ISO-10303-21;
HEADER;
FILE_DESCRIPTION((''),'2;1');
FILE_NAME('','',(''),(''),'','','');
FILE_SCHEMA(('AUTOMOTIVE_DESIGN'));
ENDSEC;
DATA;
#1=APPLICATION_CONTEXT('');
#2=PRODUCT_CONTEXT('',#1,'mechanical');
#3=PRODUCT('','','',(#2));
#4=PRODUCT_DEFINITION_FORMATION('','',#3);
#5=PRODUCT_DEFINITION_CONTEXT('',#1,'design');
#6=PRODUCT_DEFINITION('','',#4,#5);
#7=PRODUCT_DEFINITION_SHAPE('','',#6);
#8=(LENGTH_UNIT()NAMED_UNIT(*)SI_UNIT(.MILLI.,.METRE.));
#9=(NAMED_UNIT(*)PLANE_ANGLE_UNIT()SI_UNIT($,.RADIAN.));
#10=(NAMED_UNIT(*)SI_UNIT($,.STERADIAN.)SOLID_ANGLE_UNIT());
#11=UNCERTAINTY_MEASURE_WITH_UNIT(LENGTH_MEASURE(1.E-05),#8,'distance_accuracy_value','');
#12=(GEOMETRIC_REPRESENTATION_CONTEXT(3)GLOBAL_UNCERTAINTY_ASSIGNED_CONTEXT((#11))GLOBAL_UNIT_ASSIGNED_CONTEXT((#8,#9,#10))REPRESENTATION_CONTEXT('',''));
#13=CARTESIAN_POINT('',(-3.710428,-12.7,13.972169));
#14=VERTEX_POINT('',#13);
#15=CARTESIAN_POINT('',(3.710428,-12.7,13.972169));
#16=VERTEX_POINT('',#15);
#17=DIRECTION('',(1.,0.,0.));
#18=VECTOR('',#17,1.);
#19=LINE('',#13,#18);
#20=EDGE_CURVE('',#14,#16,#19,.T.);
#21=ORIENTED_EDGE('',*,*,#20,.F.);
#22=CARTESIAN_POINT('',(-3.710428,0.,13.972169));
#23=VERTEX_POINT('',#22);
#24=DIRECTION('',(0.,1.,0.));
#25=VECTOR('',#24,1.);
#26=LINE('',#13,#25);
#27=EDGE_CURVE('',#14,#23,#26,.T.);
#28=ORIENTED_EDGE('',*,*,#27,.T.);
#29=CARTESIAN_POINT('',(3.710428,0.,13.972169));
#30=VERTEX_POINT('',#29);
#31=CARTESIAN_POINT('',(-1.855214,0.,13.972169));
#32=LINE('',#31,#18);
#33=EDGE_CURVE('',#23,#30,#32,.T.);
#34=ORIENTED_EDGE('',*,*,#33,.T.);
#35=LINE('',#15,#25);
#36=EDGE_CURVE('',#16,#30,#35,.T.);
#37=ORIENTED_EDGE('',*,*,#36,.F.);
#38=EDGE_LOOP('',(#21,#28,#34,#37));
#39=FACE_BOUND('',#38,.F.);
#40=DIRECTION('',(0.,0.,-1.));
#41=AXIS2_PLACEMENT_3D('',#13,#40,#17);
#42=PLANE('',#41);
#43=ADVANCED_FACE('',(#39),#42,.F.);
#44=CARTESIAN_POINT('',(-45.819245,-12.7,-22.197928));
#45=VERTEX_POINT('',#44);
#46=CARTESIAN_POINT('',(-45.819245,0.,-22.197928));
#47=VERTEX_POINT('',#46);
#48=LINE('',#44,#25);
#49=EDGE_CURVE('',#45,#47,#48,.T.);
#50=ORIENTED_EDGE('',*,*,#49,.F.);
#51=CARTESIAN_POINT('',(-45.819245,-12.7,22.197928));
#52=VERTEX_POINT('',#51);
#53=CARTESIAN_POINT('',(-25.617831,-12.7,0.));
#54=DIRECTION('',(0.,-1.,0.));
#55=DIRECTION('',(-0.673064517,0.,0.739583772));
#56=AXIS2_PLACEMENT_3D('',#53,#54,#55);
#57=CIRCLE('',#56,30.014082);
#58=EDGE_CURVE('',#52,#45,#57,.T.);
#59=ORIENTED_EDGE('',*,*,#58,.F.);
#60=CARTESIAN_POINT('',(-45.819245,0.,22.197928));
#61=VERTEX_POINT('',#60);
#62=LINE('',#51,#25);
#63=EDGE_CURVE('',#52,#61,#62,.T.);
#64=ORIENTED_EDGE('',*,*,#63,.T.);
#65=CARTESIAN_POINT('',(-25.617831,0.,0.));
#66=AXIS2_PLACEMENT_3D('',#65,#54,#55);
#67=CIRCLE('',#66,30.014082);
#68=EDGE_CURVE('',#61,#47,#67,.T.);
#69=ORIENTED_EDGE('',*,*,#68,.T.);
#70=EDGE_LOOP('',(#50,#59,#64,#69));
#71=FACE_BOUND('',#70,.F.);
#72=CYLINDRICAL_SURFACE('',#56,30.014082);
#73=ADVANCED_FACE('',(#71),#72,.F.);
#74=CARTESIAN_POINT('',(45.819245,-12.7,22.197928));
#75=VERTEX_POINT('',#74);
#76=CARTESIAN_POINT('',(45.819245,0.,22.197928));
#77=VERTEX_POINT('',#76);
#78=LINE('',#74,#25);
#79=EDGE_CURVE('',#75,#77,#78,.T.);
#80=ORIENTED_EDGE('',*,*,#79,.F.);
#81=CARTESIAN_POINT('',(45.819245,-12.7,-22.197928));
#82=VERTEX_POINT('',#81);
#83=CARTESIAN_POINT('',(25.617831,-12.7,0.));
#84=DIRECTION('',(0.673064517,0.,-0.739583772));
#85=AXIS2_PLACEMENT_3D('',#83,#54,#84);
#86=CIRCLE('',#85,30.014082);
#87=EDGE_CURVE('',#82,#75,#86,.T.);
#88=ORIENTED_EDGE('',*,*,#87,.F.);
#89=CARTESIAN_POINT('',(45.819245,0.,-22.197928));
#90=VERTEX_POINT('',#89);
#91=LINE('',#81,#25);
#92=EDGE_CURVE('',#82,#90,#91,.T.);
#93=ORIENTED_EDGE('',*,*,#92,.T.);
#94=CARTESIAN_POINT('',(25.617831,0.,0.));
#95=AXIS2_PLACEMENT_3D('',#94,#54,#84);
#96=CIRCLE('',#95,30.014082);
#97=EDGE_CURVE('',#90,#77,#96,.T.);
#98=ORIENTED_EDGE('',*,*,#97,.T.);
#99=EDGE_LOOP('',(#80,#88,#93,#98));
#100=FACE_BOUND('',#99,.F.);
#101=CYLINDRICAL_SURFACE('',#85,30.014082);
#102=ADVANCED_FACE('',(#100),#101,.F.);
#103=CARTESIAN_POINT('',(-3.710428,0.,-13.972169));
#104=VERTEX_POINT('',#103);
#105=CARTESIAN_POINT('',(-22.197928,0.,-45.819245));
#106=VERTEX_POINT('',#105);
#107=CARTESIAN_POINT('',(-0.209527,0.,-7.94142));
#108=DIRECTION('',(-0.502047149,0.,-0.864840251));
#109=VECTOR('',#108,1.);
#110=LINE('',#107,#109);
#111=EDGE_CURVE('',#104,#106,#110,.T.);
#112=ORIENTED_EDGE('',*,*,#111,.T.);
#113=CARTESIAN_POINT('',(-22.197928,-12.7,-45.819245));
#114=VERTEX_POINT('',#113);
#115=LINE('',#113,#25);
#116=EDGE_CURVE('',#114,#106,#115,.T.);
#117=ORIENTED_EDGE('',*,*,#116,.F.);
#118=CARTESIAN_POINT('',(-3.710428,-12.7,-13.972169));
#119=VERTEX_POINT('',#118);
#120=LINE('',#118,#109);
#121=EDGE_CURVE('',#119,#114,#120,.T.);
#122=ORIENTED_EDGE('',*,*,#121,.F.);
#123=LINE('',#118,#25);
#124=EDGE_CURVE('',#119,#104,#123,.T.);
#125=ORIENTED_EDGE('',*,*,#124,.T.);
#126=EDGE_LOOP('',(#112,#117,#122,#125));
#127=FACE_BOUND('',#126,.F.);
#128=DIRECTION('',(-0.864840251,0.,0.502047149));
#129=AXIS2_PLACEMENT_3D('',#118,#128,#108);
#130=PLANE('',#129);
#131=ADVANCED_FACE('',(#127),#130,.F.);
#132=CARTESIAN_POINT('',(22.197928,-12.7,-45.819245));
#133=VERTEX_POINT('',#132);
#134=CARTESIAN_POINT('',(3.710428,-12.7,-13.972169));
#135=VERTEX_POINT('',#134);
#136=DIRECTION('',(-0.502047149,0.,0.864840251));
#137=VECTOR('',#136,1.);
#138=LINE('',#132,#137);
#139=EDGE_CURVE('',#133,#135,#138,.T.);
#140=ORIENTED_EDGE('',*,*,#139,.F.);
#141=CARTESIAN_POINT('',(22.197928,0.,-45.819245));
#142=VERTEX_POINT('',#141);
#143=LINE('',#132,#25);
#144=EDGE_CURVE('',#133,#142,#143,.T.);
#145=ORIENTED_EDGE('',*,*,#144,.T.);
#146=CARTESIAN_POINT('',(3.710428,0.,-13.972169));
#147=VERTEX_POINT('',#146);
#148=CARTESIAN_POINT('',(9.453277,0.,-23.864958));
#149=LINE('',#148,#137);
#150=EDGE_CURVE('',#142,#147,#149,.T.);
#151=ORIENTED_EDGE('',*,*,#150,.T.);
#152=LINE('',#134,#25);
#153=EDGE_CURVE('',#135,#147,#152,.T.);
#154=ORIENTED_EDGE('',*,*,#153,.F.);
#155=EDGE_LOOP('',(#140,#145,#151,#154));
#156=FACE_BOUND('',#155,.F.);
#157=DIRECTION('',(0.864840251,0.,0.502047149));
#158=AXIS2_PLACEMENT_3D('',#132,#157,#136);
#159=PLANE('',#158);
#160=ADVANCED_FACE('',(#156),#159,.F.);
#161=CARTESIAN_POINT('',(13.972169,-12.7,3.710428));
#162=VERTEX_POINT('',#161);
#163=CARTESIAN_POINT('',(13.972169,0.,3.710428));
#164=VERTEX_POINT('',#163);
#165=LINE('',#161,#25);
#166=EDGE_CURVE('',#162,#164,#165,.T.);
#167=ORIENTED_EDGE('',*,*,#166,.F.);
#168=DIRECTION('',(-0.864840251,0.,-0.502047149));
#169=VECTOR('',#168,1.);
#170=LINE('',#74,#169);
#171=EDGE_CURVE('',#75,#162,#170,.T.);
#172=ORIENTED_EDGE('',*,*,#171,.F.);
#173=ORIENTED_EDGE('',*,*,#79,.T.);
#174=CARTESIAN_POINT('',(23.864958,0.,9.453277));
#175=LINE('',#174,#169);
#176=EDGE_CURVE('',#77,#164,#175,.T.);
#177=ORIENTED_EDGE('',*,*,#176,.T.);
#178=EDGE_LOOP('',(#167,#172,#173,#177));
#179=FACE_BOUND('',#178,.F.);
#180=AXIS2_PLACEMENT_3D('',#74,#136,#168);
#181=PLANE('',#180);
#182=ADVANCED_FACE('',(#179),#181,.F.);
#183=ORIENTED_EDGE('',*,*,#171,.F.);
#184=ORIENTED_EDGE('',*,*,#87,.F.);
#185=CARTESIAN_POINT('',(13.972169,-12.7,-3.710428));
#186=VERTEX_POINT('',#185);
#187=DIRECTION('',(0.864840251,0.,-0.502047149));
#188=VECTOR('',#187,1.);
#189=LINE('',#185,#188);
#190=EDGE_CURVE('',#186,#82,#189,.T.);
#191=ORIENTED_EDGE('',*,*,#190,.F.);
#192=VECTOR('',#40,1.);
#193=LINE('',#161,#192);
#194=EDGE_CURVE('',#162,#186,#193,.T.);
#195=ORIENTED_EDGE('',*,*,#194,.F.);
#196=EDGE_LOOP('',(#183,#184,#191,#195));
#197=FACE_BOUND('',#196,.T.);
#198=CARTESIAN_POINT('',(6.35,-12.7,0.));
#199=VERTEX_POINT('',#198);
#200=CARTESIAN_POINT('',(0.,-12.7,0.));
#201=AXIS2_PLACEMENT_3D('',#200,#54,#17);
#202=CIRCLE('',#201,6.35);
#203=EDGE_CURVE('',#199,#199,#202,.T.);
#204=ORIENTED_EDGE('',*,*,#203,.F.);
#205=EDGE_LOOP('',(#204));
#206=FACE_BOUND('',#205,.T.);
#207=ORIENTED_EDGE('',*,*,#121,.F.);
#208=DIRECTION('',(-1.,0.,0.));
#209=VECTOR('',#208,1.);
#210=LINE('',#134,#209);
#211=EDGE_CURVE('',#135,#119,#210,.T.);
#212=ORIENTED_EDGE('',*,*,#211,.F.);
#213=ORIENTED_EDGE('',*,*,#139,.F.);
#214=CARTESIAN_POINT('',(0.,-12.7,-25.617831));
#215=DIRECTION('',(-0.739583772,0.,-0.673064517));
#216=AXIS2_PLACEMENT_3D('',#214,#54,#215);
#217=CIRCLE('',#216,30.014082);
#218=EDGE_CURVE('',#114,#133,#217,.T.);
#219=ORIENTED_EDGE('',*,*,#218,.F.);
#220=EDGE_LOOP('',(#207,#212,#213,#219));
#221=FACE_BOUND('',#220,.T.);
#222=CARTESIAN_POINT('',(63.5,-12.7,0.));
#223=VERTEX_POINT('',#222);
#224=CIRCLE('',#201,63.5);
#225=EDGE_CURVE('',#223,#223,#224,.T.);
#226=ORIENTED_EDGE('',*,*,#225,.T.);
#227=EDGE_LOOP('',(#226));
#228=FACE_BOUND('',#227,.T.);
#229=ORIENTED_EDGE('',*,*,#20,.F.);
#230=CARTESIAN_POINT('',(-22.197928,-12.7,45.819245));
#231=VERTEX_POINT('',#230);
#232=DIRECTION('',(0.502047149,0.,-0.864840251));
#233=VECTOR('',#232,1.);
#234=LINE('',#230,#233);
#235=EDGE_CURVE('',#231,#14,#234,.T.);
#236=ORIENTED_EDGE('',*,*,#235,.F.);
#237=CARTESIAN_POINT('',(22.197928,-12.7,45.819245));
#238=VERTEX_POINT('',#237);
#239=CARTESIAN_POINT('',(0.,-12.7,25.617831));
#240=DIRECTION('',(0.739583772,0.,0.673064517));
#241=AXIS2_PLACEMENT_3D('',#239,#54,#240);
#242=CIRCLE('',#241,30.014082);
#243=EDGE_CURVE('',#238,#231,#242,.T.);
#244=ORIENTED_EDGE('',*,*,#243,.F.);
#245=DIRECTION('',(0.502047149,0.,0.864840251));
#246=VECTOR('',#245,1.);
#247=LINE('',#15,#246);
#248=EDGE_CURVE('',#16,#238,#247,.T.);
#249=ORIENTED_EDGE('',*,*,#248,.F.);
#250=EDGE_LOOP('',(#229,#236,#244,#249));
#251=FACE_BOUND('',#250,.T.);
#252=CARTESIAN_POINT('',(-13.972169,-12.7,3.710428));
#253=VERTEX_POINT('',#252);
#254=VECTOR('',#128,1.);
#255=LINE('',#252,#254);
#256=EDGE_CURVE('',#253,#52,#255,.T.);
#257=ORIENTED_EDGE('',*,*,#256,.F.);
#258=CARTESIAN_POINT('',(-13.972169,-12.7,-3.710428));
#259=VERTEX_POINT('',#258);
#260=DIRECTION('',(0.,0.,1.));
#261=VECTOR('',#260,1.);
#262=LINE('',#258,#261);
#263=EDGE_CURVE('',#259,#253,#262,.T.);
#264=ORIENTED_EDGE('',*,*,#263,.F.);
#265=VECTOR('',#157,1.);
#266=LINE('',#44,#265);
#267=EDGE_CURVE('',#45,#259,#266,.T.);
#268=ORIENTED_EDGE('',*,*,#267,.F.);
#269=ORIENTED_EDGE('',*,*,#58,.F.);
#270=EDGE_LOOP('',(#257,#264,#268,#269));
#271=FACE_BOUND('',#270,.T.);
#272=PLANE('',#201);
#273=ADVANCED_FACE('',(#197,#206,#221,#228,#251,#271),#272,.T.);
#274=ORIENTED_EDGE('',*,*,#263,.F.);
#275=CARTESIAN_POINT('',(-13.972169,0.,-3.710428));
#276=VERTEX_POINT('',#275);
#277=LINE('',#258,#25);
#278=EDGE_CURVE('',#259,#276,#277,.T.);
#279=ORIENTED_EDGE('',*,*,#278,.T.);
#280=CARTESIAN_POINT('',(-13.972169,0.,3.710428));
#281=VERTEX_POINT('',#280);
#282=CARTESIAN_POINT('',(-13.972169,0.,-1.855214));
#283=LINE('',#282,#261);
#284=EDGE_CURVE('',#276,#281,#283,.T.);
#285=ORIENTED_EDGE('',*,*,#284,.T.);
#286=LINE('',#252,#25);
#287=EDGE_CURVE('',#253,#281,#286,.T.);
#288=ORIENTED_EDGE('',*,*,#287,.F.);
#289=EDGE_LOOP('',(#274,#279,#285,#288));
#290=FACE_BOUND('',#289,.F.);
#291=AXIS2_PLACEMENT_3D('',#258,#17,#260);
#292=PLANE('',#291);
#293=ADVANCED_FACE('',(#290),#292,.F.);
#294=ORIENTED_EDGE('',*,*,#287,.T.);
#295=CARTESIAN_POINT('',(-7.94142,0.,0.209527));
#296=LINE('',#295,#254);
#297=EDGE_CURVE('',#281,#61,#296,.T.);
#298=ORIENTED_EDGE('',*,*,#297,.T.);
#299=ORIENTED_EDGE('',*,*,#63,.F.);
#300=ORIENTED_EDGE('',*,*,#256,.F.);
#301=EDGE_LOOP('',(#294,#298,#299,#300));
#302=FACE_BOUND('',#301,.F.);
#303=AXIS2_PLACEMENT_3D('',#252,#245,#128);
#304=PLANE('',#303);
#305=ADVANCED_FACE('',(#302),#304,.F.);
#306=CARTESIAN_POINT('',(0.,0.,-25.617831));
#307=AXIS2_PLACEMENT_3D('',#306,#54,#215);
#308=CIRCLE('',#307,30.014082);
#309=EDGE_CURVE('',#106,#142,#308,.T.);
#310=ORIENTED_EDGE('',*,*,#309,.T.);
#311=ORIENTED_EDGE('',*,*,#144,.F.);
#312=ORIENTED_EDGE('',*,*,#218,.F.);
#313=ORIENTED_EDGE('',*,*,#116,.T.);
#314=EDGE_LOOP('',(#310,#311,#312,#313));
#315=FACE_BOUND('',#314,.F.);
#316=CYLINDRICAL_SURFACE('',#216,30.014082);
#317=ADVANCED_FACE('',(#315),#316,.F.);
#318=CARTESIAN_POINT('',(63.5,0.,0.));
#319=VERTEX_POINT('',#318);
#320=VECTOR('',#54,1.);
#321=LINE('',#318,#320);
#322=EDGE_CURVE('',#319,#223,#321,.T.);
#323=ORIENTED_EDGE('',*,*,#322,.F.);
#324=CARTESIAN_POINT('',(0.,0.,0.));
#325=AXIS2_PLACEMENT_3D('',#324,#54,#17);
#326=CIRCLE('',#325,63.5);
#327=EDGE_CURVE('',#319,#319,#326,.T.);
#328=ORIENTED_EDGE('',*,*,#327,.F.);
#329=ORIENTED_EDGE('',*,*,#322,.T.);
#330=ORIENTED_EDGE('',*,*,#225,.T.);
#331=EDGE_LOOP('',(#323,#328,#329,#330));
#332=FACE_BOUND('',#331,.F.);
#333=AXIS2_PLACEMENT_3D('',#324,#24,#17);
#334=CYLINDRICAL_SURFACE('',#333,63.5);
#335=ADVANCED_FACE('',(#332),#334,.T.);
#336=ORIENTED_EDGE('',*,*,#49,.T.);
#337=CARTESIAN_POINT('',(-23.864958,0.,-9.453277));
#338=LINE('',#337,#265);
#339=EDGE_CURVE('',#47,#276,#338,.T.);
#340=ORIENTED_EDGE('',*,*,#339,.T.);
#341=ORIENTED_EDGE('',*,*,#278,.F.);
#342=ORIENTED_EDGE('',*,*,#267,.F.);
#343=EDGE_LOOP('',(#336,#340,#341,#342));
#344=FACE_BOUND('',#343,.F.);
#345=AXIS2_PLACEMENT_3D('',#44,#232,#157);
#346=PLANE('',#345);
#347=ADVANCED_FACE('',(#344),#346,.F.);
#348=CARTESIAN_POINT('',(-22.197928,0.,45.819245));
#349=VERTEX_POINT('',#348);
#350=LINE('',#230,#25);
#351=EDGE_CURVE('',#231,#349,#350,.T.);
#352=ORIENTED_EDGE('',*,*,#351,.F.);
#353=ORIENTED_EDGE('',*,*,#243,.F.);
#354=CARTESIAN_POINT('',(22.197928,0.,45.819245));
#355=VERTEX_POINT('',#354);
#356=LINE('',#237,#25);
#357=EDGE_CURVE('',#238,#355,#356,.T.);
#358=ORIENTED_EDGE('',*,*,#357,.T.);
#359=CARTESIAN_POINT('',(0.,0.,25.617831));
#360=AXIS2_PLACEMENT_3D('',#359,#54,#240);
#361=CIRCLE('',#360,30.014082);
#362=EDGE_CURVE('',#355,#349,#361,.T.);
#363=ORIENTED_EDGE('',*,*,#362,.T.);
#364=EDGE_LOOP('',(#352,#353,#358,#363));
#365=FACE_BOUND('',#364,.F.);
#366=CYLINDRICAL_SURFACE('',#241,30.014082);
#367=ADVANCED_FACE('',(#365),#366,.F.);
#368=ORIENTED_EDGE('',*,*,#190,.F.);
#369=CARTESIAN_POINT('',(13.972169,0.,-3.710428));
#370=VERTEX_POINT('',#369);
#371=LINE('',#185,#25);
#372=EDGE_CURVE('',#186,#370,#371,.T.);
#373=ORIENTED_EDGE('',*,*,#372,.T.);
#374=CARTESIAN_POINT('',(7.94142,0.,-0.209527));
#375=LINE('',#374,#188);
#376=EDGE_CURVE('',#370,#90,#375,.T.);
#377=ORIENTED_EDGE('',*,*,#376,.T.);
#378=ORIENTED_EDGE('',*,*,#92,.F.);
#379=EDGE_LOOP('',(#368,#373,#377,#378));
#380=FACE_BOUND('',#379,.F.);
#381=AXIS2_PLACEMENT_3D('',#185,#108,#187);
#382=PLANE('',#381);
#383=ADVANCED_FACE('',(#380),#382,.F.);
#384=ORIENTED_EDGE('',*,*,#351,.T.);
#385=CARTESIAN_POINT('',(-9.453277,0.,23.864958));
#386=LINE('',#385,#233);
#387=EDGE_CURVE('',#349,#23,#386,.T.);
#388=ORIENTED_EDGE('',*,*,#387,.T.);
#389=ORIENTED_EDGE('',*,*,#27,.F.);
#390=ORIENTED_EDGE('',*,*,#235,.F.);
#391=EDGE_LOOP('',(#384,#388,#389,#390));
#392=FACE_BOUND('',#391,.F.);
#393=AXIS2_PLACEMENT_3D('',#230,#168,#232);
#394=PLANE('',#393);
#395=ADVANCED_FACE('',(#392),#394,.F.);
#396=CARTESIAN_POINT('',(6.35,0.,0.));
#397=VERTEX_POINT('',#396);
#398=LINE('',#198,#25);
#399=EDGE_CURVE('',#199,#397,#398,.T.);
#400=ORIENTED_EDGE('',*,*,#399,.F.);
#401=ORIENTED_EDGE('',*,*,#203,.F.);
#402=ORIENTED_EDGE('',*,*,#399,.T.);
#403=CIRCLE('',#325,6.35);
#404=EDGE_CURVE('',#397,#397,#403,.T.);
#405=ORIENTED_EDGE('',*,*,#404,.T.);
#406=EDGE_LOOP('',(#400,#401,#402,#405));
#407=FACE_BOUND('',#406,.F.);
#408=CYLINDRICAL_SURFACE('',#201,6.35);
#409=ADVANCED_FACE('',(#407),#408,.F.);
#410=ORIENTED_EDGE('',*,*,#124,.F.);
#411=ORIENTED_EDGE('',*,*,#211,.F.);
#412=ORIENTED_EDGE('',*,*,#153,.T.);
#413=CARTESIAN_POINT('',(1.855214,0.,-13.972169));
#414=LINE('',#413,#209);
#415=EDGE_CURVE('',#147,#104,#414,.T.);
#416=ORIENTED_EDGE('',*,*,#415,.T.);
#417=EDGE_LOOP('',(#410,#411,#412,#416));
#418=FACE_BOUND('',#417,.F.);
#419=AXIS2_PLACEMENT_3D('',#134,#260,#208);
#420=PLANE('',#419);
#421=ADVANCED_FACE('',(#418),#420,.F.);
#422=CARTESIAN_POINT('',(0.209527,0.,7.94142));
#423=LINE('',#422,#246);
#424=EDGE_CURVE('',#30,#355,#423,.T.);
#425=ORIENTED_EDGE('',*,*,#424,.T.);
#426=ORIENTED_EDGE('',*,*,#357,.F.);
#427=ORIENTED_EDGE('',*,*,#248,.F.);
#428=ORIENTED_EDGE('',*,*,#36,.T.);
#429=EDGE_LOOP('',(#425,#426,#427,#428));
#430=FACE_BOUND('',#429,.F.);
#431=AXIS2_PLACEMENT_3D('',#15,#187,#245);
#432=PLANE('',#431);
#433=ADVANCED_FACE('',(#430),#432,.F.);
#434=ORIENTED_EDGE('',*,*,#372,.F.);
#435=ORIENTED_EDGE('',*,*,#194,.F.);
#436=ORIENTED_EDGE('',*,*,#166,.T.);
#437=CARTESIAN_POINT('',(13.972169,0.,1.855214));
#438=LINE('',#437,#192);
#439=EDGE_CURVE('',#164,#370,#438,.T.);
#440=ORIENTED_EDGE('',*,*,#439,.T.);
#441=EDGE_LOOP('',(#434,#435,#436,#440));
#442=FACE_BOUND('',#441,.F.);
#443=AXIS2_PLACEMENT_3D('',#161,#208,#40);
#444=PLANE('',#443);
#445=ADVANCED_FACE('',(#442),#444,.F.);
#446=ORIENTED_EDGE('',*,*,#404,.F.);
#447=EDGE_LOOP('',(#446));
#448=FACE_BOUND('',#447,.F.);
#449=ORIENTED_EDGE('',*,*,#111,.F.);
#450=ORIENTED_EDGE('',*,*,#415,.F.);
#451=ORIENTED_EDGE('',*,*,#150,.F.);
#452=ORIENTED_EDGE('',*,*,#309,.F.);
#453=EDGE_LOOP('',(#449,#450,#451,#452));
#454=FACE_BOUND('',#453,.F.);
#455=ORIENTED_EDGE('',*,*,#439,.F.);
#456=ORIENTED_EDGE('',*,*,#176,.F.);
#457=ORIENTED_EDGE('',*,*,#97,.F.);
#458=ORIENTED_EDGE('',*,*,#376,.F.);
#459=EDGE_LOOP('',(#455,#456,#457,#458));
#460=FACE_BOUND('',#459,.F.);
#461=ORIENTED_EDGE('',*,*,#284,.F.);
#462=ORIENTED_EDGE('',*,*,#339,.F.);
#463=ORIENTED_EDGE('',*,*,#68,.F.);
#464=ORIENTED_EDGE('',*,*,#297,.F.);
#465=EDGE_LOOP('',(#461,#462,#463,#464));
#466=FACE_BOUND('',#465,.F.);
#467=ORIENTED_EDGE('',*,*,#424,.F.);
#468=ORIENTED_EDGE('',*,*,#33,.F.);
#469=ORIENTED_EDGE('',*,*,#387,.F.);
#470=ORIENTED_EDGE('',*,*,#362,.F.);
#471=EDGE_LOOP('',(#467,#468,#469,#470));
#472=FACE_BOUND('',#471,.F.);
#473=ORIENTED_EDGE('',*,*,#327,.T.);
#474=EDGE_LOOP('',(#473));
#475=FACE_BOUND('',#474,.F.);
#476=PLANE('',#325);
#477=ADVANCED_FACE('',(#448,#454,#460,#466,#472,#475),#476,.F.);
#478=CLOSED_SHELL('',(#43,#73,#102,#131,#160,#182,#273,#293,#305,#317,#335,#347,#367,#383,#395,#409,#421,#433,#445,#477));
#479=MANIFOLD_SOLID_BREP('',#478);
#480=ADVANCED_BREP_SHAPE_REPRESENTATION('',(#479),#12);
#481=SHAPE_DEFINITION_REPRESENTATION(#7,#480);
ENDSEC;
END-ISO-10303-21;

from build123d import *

# Parameters (mm, degrees)
F0_R            = 63.5
F1_DEPTH        = 12.7
F2_R            = 6.35
F3_DEPTH        = 12.701
F5_DEPTH        = 12.701
F5_COPIES_COUNT = 4


# Not quite as in the source:
# - a pattern or mirror of a feature is missing from the dataset's text; its kind, count and spacing are read off the source's solid


with BuildPart() as f1:
    # F0 (on Front) → F1 (new body)
    with BuildSketch(Plane.XZ):
        Circle(F0_R)
    extrude(amount=F1_DEPTH)

    # F2 (on face) → F3 (cut, through all)
    with BuildSketch(Plane.XZ.offset(12.7)):
        Circle(F2_R)
    extrude(amount=-F3_DEPTH, mode=Mode.SUBTRACT)

    # F4 (on face) → F5 (cut, through all)
    with BuildSketch(Plane.XZ.offset(12.7)):
        with BuildLine():
            Line((-22.1979282796, 45.8192452788), (-3.7104284856, 13.9721687883))
            Line((-3.7104284856, 13.9721687883), (3.7104284856, 13.9721687883))
            Line((3.7104284856, 13.9721687883), (22.1979282796, 45.8192452788))
            ThreePointArc((22.1979282796, 45.8192452788), (0, 55.6319138023), (-22.1979282796, 45.8192452788))
        make_face()
    f5 = extrude(amount=-F5_DEPTH, mode=Mode.SUBTRACT)

    # F5_copies: F5 ×4 about axis
    f5_copies_axis = Axis((0, 0, 0), (0, 1, 0))
    for i in range(1, F5_COPIES_COUNT):
        add(f5.rotate(f5_copies_axis, i * 360 / F5_COPIES_COUNT), mode=Mode.SUBTRACT)


solid = f1.part
